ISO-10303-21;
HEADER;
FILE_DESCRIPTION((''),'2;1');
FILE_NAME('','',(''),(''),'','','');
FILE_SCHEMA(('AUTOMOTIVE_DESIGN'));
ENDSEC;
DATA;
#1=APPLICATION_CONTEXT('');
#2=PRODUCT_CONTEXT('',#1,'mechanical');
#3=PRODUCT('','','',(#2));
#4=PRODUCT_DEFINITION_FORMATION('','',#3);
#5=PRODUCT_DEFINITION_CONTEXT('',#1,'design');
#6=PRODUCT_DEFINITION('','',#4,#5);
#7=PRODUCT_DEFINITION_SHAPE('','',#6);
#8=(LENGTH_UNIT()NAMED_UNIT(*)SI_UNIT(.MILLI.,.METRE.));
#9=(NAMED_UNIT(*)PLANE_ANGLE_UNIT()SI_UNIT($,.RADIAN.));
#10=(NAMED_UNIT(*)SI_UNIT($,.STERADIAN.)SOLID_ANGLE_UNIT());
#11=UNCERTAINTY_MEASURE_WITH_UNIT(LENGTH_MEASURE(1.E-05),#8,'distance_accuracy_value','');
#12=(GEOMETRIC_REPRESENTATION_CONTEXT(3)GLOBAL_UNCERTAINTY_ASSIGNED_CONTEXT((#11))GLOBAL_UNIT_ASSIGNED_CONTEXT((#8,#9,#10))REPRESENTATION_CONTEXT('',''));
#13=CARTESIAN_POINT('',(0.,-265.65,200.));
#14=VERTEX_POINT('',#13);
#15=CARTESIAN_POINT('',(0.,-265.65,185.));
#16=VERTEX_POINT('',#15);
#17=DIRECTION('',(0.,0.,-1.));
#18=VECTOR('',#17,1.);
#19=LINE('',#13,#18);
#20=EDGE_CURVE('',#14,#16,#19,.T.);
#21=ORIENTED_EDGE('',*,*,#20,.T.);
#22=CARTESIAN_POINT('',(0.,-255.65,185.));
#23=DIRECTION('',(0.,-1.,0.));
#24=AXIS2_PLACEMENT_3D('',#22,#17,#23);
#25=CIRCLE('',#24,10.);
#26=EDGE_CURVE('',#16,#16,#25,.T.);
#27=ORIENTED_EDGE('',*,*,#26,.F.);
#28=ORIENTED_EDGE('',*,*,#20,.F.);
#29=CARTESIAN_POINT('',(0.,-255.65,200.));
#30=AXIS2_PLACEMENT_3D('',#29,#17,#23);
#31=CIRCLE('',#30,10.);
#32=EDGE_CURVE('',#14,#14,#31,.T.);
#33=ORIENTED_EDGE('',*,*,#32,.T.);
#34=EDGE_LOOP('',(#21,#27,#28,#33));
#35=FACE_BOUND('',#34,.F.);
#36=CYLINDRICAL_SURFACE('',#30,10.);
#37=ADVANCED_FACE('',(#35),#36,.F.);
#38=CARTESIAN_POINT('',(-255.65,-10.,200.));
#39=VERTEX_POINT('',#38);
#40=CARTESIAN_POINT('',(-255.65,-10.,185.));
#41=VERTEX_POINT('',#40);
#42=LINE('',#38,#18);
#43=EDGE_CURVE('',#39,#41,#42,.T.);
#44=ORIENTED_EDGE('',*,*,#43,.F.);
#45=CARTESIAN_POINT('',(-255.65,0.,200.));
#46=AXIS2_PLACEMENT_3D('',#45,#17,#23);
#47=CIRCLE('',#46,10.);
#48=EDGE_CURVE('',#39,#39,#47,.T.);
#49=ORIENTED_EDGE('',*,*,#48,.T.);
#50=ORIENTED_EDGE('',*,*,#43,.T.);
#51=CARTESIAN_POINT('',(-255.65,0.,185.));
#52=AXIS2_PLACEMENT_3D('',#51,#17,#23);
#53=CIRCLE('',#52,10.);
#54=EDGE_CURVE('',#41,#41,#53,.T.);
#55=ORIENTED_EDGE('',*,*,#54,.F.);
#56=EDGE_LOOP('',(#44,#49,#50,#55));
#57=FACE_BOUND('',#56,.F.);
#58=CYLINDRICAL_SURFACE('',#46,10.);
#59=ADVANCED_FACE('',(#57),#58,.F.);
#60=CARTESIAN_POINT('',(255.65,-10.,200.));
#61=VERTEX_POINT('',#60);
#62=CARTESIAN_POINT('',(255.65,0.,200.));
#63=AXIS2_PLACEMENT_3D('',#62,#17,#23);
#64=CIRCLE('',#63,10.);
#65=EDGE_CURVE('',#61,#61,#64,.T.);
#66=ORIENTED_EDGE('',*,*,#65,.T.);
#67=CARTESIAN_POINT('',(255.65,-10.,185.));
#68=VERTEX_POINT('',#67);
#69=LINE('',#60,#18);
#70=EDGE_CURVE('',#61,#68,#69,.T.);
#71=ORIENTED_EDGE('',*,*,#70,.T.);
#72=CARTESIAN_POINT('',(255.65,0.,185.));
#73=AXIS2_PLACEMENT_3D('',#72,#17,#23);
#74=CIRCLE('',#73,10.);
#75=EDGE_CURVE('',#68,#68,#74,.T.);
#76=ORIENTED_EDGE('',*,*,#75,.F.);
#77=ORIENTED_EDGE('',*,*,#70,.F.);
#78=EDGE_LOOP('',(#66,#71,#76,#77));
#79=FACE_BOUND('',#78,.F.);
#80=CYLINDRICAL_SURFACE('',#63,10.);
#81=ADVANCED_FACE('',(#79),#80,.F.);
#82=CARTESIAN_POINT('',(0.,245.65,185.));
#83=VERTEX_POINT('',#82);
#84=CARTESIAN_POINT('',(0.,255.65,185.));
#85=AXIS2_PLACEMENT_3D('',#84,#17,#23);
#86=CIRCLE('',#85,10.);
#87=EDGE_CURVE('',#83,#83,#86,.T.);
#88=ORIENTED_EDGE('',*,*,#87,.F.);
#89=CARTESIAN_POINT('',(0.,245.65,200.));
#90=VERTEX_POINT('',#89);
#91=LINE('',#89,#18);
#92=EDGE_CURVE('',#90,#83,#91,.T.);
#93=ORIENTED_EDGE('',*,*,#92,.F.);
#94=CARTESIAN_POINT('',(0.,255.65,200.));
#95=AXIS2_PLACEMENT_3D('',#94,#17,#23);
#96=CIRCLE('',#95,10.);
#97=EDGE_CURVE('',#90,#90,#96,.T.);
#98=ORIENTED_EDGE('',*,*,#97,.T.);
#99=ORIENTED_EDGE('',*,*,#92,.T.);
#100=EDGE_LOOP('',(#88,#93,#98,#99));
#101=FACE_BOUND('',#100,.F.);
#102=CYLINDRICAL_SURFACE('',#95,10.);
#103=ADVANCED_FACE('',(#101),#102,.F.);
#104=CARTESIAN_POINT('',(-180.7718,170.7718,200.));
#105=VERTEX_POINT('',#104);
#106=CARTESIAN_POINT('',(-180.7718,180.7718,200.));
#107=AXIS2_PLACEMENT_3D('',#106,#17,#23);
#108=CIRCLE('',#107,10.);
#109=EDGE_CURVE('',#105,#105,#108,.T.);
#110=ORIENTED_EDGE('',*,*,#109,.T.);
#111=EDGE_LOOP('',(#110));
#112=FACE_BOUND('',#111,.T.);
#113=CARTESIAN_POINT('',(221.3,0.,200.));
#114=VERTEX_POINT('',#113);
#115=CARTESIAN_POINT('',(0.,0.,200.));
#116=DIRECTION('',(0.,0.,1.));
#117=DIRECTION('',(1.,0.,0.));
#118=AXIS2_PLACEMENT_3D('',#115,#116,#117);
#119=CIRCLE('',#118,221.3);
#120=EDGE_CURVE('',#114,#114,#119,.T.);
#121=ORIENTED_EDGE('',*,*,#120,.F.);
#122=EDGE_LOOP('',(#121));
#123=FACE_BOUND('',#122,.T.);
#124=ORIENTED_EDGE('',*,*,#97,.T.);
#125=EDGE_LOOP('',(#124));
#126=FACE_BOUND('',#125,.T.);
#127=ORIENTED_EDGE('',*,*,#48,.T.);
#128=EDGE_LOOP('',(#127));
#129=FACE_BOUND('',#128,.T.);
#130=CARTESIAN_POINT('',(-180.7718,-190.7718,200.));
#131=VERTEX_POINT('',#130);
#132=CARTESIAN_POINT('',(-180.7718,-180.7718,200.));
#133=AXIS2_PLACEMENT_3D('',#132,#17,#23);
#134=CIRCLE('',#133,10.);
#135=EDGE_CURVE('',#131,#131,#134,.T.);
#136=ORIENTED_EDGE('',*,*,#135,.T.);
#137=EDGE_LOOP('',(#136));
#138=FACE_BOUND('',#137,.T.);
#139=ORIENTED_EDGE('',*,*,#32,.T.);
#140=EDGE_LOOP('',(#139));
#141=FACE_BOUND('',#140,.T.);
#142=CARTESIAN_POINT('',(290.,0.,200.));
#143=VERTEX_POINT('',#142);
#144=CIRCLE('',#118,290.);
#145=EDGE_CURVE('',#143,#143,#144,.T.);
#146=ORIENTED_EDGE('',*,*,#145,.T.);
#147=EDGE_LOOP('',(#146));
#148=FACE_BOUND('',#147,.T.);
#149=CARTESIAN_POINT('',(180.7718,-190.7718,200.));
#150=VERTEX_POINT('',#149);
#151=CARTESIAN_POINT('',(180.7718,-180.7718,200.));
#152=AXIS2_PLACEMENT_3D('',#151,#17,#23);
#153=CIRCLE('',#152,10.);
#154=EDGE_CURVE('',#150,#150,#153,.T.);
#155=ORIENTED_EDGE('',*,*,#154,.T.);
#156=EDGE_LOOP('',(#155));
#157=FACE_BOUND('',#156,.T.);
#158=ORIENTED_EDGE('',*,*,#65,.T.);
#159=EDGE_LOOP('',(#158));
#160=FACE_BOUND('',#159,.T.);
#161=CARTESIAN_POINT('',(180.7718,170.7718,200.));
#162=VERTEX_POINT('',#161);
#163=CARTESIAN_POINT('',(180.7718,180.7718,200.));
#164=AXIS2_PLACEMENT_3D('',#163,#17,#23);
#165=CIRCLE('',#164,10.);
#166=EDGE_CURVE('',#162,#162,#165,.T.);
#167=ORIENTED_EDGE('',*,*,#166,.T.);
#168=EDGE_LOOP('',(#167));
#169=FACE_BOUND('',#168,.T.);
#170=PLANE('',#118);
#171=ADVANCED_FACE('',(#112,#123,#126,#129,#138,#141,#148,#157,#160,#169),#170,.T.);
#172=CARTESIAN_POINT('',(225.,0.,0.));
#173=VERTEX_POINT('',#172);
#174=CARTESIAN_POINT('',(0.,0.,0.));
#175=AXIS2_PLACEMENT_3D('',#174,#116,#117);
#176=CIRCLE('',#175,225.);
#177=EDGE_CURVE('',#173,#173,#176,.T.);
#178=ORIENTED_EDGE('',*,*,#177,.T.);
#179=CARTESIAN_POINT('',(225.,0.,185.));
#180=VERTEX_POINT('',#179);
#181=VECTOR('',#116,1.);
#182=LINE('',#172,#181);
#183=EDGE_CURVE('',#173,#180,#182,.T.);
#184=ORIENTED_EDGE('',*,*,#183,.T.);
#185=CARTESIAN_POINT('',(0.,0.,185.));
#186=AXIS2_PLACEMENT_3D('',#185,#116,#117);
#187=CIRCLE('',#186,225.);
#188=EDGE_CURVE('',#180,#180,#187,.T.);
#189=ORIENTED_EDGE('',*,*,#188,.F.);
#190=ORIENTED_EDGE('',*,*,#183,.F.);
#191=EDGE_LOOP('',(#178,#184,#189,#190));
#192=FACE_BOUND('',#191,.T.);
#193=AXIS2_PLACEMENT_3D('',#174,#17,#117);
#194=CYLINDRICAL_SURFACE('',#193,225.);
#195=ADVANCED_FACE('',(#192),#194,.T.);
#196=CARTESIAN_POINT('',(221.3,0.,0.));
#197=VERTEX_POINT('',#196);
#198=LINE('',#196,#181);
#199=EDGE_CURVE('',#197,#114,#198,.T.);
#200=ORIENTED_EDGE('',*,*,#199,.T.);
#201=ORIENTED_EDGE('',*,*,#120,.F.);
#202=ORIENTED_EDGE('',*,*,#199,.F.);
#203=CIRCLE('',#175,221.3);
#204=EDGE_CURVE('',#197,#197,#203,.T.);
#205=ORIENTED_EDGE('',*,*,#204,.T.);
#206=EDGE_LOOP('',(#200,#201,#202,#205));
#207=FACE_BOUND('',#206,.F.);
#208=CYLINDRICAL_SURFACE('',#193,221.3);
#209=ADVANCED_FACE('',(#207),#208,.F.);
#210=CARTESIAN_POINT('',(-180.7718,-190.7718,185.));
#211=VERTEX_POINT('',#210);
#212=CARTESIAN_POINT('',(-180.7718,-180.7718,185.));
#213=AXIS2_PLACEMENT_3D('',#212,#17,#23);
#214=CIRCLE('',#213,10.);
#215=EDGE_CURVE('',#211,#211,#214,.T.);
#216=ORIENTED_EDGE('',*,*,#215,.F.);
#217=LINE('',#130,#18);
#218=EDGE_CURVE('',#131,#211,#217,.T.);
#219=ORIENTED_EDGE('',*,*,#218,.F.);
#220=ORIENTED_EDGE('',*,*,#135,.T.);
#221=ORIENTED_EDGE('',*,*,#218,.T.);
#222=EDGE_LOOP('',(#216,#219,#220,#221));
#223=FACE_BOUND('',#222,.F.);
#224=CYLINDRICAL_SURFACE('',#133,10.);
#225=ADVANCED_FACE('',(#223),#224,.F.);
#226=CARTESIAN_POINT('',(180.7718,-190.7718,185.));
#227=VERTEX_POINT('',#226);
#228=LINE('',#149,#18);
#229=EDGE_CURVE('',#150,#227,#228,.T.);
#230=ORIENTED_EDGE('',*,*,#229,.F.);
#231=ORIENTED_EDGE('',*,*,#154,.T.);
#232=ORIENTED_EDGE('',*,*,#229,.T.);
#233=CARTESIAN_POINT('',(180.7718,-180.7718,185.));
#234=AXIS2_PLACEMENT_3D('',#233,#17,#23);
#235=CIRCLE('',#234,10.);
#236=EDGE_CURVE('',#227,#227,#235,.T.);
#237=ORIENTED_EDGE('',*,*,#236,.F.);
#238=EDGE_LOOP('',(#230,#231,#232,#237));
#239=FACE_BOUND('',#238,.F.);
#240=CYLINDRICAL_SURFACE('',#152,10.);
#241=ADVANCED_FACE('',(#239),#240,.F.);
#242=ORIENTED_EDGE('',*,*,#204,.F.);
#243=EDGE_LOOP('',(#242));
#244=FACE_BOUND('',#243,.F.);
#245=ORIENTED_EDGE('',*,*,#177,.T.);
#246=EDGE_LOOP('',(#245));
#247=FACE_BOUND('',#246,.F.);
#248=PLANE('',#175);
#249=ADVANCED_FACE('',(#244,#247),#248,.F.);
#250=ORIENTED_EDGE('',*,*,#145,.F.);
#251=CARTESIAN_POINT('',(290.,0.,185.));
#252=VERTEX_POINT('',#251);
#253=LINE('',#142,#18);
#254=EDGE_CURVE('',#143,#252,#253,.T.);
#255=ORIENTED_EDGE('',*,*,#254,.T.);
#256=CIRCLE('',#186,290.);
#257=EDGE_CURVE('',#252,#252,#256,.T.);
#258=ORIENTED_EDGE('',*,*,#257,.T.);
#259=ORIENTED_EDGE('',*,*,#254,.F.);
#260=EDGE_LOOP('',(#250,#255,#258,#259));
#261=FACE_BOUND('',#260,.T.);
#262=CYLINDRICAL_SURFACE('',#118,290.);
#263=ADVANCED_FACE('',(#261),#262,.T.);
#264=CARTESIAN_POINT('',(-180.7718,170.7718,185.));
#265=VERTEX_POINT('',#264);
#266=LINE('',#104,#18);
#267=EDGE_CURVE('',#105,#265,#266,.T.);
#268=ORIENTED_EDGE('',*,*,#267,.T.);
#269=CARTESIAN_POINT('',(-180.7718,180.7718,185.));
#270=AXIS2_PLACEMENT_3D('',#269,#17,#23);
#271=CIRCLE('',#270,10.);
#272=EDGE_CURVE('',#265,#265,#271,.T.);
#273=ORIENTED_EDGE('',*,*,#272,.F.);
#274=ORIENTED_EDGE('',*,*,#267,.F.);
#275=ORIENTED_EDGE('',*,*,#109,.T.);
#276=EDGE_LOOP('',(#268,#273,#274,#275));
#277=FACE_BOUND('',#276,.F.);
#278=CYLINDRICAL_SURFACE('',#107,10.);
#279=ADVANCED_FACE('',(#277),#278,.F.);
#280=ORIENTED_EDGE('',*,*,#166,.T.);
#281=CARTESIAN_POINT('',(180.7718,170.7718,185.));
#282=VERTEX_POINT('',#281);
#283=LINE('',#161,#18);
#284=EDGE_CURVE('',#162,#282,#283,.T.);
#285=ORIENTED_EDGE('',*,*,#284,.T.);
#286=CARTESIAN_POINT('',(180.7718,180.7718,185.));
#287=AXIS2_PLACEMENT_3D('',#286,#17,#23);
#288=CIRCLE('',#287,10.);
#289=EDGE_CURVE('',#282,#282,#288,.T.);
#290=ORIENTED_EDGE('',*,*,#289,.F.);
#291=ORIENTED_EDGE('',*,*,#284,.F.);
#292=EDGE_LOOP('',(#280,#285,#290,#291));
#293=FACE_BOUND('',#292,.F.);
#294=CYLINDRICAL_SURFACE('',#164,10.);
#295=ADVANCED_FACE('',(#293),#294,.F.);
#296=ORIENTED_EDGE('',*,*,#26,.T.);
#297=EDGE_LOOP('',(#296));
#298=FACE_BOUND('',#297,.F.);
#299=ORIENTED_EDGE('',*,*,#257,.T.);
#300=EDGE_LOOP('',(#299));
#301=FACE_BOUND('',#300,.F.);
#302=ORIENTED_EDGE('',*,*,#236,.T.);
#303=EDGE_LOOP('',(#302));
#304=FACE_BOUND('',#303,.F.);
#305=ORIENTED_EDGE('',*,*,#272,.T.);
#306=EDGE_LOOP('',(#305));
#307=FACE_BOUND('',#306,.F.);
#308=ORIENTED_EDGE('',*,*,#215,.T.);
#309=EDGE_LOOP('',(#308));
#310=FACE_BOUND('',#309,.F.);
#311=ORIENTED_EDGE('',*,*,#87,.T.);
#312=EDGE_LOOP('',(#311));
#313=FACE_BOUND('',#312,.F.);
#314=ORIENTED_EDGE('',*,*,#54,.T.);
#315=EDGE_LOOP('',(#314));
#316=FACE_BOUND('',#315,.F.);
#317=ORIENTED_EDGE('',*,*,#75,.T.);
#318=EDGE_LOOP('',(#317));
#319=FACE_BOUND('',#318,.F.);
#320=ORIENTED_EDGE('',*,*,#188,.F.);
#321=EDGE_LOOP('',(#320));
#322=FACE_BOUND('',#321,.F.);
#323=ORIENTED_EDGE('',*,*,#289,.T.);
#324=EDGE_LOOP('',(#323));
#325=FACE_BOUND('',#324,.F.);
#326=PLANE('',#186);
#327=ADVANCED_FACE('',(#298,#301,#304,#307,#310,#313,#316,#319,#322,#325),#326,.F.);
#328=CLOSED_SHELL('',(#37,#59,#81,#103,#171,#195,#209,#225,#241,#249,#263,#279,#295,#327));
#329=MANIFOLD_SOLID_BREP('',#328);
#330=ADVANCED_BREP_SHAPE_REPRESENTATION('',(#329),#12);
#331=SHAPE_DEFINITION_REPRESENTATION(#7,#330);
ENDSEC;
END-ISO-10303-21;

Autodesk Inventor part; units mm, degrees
ref_plane "YZ Plane" through (0, 0, 0) normal (1, 0, 0) x (0, 1, 0)
ref_plane "XZ Plane" through (0, 0, 0) normal (0, 1, 0) x (-1, 0, 0)
ref_plane "XY Plane" through (0, 0, 0) normal (0, 0, 1) x (1, 0, 0)
sketch "草图1" plane through (0, 0, 0) normal (0, 0, 1) x (1, 0, 0)
  circle A0 centre (0, 0) radius 225
  dimension "d0" = 450
surface extrude "拉伸曲面1" sketch "草图1" along normal blind 200 shown no curves A0
thicken "加厚1" operation new thickness 3.7 both sides no extend neighbours no toward (-0.4864037, 0.8737342, 0) faces at (109.4408, -196.5902, 133.3333)
sketch "草图2" plane through (0, 0, 200) normal (0, 0, 1) x (1, 0, 0)
  circle A0 centre (0, 0) radius 225 projected
  circle A1 centre (0, 0) radius 221.3 projected
  circle A2 centre (0, 0) radius 290
  dimension "d18" = 580
  dimension "d19" = 442.6
  dimension "d20" = 450
extrude "拉伸1" add sketch "草图2" against normal blind 15 contours A2
sketch "草图3" plane through (0, 0, 200) normal (0, 0, 1) x (1, 0, 0)
  circle A0 centre (0, 0) radius 290 projected
  circle A1 centre (0, 0) radius 221.3 projected
  line L0 (0, -221.3) -> (0, -290)
  point P0 (0, -255.65)
  point P1 (180.7718, -180.7718)
  point P2 (255.65, 0)
  point P3 (180.7718, 180.7718)
  point P4 (0, 255.65)
  point P5 (-180.7718, 180.7718)
  point P6 (-255.65, 0)
  point P7 (-180.7718, -180.7718)
  dimension "d9" = 360
  dimension "d21" = 255.65
hole "孔1" at (0, -255.65, 200) at (180.7718, -180.7718, 200) at (255.65, 0, 200) at (180.7718, 180.7718, 200) at (0, 255.65, 200) at (-180.7718, 180.7718, 200) at (-255.65, 0, 200) at (-180.7718, -180.7718, 200) direction (0, 0, -1) diameter 20 end through all
sketch "草图4" plane through (0, 0, 0) normal (1, 0, 0) x (0, 1, 0)
  line L0 (-225, 185) -> (225, 185) projected
  line L1 (225, 0) -> (-225, 0) projected
  line L2 (225, 0) -> (-225, 0) projected
  line L3 (-225, 0) -> (225, 92.5)
  line L4 (225, 0) -> (225, 185) projected
  point P0 (0, 0)
extrude "拉伸2" [suppressed]
properties part number "人孔"
